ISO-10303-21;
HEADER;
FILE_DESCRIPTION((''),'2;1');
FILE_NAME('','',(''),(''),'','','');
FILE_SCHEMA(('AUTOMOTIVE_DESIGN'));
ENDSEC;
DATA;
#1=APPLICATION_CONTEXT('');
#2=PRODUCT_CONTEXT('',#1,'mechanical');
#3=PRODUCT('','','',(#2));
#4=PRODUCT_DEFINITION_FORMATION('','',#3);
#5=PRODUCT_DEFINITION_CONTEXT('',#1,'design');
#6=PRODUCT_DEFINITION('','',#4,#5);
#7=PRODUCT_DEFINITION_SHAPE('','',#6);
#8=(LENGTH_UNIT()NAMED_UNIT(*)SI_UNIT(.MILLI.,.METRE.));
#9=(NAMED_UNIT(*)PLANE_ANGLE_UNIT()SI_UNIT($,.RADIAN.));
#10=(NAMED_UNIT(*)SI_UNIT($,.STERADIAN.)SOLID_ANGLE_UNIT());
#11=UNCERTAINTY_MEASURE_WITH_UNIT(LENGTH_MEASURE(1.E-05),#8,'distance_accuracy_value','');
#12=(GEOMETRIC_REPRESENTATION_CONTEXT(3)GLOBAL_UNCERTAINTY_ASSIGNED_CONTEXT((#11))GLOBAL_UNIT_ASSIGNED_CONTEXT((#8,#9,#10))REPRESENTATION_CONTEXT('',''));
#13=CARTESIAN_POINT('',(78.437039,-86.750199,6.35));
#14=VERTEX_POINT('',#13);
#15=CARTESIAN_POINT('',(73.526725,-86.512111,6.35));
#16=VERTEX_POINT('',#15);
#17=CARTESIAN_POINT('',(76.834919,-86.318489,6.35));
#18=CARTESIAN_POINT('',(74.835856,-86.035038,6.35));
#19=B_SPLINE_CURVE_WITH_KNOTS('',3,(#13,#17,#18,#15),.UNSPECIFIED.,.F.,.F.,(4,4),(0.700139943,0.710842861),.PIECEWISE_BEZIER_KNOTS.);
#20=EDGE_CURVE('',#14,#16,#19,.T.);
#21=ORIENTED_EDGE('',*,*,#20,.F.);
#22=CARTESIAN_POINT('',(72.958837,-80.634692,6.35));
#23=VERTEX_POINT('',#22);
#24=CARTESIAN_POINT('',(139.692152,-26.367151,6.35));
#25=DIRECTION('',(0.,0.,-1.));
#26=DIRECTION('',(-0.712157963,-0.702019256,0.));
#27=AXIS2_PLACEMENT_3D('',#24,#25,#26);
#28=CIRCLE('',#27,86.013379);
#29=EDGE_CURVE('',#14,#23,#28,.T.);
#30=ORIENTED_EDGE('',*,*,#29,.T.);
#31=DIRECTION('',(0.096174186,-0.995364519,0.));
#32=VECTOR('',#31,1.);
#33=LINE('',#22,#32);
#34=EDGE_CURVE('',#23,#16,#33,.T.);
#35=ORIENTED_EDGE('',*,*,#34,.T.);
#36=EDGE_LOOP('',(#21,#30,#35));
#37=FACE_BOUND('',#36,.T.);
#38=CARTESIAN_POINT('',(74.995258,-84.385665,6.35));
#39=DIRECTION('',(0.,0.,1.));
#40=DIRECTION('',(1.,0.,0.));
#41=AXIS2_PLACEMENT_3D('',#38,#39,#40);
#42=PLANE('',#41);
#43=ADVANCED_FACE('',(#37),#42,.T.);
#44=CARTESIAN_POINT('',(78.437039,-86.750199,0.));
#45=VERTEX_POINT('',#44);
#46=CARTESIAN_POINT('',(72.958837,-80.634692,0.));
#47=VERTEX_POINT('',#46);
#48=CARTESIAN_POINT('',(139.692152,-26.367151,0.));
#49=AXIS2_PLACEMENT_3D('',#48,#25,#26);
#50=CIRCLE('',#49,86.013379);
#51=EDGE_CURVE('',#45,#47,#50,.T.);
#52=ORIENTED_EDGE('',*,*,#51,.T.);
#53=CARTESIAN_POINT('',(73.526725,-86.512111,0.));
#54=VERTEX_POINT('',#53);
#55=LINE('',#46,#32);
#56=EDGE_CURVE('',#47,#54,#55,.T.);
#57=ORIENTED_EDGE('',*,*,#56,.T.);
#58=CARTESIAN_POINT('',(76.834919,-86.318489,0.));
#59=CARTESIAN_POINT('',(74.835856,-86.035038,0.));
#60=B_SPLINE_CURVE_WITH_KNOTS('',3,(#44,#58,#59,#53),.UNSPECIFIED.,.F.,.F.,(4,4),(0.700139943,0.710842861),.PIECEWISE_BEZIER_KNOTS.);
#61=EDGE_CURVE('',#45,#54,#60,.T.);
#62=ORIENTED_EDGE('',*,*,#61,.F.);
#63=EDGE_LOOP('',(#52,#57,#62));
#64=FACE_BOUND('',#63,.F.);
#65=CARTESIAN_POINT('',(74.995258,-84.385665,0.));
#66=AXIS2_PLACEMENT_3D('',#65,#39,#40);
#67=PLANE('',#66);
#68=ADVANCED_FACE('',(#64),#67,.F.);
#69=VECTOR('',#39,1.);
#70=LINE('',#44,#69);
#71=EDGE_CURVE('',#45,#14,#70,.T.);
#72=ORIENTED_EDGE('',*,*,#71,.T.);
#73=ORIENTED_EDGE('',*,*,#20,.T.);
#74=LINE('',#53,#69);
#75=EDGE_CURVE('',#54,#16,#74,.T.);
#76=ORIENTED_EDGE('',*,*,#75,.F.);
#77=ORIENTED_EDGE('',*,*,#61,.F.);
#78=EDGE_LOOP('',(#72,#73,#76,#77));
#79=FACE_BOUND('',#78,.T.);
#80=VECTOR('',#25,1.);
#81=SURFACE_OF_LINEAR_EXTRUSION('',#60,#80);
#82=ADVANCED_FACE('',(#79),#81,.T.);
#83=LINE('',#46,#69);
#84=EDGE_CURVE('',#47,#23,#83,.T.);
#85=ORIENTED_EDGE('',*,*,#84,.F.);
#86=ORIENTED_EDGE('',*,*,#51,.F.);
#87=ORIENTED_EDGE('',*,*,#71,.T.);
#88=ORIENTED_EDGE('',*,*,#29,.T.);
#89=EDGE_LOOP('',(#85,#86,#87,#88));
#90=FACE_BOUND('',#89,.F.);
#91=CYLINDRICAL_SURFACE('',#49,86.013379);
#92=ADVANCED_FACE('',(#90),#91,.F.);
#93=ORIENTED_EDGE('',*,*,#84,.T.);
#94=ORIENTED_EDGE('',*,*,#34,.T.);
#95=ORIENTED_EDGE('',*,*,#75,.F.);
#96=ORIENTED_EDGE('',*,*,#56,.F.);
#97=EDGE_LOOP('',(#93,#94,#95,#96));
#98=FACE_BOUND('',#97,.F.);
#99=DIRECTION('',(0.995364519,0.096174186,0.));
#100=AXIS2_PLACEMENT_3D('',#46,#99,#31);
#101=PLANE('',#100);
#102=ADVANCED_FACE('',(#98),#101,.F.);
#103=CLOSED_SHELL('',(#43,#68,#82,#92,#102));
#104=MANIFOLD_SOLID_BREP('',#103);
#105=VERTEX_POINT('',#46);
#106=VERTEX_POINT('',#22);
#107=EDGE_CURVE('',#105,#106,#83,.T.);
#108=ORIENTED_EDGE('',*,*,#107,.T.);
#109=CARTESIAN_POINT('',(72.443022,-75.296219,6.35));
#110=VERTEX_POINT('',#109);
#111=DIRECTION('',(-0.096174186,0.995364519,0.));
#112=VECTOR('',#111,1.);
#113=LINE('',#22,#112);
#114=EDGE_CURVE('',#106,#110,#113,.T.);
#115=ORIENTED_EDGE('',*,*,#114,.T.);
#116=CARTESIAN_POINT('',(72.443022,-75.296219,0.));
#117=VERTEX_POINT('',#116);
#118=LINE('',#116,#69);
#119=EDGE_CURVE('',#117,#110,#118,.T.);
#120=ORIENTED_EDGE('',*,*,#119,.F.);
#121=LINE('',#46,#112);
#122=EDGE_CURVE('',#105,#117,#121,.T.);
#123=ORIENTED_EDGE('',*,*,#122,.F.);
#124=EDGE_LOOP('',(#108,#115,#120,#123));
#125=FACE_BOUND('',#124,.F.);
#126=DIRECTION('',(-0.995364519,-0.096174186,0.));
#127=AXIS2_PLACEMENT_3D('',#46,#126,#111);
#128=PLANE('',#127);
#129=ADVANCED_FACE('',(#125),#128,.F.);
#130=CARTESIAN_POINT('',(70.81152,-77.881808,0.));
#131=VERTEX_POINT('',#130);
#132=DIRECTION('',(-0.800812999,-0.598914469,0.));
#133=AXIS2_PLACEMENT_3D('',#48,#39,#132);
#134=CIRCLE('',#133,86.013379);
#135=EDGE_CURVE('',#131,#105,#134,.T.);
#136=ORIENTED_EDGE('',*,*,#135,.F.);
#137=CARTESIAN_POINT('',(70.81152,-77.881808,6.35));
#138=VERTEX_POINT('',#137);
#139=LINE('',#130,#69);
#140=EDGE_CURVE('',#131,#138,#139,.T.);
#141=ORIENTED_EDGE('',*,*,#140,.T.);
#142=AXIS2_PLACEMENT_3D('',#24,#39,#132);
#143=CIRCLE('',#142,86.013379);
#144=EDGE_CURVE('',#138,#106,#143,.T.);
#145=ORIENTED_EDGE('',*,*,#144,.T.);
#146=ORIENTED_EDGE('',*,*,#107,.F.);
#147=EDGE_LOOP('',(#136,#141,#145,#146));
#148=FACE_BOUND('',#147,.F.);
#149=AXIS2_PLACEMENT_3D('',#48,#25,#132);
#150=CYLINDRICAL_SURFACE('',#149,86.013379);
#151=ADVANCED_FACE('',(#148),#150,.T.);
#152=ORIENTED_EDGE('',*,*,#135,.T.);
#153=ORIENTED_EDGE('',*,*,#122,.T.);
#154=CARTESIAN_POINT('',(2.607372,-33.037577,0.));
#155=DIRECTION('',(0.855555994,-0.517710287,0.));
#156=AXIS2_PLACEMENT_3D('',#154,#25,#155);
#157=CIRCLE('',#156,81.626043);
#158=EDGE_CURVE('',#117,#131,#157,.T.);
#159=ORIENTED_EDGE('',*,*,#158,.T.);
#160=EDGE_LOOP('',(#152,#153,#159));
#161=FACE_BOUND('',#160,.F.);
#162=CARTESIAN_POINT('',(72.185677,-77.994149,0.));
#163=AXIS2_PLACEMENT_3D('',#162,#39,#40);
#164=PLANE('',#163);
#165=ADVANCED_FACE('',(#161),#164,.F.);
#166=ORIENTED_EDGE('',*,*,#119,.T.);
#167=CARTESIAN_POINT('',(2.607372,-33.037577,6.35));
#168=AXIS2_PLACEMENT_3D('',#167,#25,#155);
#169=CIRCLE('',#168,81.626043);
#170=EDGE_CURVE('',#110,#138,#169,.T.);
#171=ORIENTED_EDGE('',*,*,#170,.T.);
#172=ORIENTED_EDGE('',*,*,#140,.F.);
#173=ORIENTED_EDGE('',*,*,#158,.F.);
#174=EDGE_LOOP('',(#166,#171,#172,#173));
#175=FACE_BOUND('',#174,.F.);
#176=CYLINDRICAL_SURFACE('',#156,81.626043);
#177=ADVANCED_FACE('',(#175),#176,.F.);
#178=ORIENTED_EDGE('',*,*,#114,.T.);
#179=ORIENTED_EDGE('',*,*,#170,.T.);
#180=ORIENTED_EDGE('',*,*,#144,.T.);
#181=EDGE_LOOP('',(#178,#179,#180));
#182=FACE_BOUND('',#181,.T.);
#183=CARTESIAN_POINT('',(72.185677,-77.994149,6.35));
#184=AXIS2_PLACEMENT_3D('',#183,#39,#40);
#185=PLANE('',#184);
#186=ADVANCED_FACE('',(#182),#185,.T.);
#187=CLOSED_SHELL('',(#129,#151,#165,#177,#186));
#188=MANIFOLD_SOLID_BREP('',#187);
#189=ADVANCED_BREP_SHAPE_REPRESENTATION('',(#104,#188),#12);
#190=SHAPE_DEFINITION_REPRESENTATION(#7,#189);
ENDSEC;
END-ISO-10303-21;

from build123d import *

# Parameters (mm, degrees)
F1_DEPTH = 6.35
F2_DEPTH = 6.35


with BuildPart() as f1:
    # F0 (on Top) → F1 (new body)
    with BuildSketch(Plane.XY):
        with BuildLine():
            ThreePointArc((78.4370391826, -86.7501992629), (75.624927239, -83.7578477701), (72.9588367307, -80.6346919236))
            Line((72.9588367307, -80.6346919236), (73.526725173, -86.5121111274))
            add(Edge.make_bspline(
                [(78.4370391826, -86.7501992629), (76.8349189463, -86.3184887646), (74.8358563915, -86.03503847), (73.526725173, -86.5121111274)],
                knots=[0.7001399432, 0.7001399432, 0.7001399432, 0.7001399432, 0.7108428606, 0.7108428606, 0.7108428606, 0.7108428606], degree=3))
        make_face()
    extrude(amount=F1_DEPTH)


with BuildPart() as f2:
    # F0 (on Top) → F2 (new body)
    with BuildSketch(Plane.XY):
        with BuildLine():
            Line((72.9588367307, -80.6346919236), (72.4430223898, -75.2962189308))
            ThreePointArc((72.4430223898, -75.2962189308), (71.6393776624, -76.5966527102), (70.8115200426, -77.8818081965))
            ThreePointArc((70.8115200426, -77.8818081965), (71.8712093435, -79.2691462556), (72.9588367307, -80.6346919236))
        make_face()
    extrude(amount=F2_DEPTH)


solid = Compound([f1.part, f2.part])
